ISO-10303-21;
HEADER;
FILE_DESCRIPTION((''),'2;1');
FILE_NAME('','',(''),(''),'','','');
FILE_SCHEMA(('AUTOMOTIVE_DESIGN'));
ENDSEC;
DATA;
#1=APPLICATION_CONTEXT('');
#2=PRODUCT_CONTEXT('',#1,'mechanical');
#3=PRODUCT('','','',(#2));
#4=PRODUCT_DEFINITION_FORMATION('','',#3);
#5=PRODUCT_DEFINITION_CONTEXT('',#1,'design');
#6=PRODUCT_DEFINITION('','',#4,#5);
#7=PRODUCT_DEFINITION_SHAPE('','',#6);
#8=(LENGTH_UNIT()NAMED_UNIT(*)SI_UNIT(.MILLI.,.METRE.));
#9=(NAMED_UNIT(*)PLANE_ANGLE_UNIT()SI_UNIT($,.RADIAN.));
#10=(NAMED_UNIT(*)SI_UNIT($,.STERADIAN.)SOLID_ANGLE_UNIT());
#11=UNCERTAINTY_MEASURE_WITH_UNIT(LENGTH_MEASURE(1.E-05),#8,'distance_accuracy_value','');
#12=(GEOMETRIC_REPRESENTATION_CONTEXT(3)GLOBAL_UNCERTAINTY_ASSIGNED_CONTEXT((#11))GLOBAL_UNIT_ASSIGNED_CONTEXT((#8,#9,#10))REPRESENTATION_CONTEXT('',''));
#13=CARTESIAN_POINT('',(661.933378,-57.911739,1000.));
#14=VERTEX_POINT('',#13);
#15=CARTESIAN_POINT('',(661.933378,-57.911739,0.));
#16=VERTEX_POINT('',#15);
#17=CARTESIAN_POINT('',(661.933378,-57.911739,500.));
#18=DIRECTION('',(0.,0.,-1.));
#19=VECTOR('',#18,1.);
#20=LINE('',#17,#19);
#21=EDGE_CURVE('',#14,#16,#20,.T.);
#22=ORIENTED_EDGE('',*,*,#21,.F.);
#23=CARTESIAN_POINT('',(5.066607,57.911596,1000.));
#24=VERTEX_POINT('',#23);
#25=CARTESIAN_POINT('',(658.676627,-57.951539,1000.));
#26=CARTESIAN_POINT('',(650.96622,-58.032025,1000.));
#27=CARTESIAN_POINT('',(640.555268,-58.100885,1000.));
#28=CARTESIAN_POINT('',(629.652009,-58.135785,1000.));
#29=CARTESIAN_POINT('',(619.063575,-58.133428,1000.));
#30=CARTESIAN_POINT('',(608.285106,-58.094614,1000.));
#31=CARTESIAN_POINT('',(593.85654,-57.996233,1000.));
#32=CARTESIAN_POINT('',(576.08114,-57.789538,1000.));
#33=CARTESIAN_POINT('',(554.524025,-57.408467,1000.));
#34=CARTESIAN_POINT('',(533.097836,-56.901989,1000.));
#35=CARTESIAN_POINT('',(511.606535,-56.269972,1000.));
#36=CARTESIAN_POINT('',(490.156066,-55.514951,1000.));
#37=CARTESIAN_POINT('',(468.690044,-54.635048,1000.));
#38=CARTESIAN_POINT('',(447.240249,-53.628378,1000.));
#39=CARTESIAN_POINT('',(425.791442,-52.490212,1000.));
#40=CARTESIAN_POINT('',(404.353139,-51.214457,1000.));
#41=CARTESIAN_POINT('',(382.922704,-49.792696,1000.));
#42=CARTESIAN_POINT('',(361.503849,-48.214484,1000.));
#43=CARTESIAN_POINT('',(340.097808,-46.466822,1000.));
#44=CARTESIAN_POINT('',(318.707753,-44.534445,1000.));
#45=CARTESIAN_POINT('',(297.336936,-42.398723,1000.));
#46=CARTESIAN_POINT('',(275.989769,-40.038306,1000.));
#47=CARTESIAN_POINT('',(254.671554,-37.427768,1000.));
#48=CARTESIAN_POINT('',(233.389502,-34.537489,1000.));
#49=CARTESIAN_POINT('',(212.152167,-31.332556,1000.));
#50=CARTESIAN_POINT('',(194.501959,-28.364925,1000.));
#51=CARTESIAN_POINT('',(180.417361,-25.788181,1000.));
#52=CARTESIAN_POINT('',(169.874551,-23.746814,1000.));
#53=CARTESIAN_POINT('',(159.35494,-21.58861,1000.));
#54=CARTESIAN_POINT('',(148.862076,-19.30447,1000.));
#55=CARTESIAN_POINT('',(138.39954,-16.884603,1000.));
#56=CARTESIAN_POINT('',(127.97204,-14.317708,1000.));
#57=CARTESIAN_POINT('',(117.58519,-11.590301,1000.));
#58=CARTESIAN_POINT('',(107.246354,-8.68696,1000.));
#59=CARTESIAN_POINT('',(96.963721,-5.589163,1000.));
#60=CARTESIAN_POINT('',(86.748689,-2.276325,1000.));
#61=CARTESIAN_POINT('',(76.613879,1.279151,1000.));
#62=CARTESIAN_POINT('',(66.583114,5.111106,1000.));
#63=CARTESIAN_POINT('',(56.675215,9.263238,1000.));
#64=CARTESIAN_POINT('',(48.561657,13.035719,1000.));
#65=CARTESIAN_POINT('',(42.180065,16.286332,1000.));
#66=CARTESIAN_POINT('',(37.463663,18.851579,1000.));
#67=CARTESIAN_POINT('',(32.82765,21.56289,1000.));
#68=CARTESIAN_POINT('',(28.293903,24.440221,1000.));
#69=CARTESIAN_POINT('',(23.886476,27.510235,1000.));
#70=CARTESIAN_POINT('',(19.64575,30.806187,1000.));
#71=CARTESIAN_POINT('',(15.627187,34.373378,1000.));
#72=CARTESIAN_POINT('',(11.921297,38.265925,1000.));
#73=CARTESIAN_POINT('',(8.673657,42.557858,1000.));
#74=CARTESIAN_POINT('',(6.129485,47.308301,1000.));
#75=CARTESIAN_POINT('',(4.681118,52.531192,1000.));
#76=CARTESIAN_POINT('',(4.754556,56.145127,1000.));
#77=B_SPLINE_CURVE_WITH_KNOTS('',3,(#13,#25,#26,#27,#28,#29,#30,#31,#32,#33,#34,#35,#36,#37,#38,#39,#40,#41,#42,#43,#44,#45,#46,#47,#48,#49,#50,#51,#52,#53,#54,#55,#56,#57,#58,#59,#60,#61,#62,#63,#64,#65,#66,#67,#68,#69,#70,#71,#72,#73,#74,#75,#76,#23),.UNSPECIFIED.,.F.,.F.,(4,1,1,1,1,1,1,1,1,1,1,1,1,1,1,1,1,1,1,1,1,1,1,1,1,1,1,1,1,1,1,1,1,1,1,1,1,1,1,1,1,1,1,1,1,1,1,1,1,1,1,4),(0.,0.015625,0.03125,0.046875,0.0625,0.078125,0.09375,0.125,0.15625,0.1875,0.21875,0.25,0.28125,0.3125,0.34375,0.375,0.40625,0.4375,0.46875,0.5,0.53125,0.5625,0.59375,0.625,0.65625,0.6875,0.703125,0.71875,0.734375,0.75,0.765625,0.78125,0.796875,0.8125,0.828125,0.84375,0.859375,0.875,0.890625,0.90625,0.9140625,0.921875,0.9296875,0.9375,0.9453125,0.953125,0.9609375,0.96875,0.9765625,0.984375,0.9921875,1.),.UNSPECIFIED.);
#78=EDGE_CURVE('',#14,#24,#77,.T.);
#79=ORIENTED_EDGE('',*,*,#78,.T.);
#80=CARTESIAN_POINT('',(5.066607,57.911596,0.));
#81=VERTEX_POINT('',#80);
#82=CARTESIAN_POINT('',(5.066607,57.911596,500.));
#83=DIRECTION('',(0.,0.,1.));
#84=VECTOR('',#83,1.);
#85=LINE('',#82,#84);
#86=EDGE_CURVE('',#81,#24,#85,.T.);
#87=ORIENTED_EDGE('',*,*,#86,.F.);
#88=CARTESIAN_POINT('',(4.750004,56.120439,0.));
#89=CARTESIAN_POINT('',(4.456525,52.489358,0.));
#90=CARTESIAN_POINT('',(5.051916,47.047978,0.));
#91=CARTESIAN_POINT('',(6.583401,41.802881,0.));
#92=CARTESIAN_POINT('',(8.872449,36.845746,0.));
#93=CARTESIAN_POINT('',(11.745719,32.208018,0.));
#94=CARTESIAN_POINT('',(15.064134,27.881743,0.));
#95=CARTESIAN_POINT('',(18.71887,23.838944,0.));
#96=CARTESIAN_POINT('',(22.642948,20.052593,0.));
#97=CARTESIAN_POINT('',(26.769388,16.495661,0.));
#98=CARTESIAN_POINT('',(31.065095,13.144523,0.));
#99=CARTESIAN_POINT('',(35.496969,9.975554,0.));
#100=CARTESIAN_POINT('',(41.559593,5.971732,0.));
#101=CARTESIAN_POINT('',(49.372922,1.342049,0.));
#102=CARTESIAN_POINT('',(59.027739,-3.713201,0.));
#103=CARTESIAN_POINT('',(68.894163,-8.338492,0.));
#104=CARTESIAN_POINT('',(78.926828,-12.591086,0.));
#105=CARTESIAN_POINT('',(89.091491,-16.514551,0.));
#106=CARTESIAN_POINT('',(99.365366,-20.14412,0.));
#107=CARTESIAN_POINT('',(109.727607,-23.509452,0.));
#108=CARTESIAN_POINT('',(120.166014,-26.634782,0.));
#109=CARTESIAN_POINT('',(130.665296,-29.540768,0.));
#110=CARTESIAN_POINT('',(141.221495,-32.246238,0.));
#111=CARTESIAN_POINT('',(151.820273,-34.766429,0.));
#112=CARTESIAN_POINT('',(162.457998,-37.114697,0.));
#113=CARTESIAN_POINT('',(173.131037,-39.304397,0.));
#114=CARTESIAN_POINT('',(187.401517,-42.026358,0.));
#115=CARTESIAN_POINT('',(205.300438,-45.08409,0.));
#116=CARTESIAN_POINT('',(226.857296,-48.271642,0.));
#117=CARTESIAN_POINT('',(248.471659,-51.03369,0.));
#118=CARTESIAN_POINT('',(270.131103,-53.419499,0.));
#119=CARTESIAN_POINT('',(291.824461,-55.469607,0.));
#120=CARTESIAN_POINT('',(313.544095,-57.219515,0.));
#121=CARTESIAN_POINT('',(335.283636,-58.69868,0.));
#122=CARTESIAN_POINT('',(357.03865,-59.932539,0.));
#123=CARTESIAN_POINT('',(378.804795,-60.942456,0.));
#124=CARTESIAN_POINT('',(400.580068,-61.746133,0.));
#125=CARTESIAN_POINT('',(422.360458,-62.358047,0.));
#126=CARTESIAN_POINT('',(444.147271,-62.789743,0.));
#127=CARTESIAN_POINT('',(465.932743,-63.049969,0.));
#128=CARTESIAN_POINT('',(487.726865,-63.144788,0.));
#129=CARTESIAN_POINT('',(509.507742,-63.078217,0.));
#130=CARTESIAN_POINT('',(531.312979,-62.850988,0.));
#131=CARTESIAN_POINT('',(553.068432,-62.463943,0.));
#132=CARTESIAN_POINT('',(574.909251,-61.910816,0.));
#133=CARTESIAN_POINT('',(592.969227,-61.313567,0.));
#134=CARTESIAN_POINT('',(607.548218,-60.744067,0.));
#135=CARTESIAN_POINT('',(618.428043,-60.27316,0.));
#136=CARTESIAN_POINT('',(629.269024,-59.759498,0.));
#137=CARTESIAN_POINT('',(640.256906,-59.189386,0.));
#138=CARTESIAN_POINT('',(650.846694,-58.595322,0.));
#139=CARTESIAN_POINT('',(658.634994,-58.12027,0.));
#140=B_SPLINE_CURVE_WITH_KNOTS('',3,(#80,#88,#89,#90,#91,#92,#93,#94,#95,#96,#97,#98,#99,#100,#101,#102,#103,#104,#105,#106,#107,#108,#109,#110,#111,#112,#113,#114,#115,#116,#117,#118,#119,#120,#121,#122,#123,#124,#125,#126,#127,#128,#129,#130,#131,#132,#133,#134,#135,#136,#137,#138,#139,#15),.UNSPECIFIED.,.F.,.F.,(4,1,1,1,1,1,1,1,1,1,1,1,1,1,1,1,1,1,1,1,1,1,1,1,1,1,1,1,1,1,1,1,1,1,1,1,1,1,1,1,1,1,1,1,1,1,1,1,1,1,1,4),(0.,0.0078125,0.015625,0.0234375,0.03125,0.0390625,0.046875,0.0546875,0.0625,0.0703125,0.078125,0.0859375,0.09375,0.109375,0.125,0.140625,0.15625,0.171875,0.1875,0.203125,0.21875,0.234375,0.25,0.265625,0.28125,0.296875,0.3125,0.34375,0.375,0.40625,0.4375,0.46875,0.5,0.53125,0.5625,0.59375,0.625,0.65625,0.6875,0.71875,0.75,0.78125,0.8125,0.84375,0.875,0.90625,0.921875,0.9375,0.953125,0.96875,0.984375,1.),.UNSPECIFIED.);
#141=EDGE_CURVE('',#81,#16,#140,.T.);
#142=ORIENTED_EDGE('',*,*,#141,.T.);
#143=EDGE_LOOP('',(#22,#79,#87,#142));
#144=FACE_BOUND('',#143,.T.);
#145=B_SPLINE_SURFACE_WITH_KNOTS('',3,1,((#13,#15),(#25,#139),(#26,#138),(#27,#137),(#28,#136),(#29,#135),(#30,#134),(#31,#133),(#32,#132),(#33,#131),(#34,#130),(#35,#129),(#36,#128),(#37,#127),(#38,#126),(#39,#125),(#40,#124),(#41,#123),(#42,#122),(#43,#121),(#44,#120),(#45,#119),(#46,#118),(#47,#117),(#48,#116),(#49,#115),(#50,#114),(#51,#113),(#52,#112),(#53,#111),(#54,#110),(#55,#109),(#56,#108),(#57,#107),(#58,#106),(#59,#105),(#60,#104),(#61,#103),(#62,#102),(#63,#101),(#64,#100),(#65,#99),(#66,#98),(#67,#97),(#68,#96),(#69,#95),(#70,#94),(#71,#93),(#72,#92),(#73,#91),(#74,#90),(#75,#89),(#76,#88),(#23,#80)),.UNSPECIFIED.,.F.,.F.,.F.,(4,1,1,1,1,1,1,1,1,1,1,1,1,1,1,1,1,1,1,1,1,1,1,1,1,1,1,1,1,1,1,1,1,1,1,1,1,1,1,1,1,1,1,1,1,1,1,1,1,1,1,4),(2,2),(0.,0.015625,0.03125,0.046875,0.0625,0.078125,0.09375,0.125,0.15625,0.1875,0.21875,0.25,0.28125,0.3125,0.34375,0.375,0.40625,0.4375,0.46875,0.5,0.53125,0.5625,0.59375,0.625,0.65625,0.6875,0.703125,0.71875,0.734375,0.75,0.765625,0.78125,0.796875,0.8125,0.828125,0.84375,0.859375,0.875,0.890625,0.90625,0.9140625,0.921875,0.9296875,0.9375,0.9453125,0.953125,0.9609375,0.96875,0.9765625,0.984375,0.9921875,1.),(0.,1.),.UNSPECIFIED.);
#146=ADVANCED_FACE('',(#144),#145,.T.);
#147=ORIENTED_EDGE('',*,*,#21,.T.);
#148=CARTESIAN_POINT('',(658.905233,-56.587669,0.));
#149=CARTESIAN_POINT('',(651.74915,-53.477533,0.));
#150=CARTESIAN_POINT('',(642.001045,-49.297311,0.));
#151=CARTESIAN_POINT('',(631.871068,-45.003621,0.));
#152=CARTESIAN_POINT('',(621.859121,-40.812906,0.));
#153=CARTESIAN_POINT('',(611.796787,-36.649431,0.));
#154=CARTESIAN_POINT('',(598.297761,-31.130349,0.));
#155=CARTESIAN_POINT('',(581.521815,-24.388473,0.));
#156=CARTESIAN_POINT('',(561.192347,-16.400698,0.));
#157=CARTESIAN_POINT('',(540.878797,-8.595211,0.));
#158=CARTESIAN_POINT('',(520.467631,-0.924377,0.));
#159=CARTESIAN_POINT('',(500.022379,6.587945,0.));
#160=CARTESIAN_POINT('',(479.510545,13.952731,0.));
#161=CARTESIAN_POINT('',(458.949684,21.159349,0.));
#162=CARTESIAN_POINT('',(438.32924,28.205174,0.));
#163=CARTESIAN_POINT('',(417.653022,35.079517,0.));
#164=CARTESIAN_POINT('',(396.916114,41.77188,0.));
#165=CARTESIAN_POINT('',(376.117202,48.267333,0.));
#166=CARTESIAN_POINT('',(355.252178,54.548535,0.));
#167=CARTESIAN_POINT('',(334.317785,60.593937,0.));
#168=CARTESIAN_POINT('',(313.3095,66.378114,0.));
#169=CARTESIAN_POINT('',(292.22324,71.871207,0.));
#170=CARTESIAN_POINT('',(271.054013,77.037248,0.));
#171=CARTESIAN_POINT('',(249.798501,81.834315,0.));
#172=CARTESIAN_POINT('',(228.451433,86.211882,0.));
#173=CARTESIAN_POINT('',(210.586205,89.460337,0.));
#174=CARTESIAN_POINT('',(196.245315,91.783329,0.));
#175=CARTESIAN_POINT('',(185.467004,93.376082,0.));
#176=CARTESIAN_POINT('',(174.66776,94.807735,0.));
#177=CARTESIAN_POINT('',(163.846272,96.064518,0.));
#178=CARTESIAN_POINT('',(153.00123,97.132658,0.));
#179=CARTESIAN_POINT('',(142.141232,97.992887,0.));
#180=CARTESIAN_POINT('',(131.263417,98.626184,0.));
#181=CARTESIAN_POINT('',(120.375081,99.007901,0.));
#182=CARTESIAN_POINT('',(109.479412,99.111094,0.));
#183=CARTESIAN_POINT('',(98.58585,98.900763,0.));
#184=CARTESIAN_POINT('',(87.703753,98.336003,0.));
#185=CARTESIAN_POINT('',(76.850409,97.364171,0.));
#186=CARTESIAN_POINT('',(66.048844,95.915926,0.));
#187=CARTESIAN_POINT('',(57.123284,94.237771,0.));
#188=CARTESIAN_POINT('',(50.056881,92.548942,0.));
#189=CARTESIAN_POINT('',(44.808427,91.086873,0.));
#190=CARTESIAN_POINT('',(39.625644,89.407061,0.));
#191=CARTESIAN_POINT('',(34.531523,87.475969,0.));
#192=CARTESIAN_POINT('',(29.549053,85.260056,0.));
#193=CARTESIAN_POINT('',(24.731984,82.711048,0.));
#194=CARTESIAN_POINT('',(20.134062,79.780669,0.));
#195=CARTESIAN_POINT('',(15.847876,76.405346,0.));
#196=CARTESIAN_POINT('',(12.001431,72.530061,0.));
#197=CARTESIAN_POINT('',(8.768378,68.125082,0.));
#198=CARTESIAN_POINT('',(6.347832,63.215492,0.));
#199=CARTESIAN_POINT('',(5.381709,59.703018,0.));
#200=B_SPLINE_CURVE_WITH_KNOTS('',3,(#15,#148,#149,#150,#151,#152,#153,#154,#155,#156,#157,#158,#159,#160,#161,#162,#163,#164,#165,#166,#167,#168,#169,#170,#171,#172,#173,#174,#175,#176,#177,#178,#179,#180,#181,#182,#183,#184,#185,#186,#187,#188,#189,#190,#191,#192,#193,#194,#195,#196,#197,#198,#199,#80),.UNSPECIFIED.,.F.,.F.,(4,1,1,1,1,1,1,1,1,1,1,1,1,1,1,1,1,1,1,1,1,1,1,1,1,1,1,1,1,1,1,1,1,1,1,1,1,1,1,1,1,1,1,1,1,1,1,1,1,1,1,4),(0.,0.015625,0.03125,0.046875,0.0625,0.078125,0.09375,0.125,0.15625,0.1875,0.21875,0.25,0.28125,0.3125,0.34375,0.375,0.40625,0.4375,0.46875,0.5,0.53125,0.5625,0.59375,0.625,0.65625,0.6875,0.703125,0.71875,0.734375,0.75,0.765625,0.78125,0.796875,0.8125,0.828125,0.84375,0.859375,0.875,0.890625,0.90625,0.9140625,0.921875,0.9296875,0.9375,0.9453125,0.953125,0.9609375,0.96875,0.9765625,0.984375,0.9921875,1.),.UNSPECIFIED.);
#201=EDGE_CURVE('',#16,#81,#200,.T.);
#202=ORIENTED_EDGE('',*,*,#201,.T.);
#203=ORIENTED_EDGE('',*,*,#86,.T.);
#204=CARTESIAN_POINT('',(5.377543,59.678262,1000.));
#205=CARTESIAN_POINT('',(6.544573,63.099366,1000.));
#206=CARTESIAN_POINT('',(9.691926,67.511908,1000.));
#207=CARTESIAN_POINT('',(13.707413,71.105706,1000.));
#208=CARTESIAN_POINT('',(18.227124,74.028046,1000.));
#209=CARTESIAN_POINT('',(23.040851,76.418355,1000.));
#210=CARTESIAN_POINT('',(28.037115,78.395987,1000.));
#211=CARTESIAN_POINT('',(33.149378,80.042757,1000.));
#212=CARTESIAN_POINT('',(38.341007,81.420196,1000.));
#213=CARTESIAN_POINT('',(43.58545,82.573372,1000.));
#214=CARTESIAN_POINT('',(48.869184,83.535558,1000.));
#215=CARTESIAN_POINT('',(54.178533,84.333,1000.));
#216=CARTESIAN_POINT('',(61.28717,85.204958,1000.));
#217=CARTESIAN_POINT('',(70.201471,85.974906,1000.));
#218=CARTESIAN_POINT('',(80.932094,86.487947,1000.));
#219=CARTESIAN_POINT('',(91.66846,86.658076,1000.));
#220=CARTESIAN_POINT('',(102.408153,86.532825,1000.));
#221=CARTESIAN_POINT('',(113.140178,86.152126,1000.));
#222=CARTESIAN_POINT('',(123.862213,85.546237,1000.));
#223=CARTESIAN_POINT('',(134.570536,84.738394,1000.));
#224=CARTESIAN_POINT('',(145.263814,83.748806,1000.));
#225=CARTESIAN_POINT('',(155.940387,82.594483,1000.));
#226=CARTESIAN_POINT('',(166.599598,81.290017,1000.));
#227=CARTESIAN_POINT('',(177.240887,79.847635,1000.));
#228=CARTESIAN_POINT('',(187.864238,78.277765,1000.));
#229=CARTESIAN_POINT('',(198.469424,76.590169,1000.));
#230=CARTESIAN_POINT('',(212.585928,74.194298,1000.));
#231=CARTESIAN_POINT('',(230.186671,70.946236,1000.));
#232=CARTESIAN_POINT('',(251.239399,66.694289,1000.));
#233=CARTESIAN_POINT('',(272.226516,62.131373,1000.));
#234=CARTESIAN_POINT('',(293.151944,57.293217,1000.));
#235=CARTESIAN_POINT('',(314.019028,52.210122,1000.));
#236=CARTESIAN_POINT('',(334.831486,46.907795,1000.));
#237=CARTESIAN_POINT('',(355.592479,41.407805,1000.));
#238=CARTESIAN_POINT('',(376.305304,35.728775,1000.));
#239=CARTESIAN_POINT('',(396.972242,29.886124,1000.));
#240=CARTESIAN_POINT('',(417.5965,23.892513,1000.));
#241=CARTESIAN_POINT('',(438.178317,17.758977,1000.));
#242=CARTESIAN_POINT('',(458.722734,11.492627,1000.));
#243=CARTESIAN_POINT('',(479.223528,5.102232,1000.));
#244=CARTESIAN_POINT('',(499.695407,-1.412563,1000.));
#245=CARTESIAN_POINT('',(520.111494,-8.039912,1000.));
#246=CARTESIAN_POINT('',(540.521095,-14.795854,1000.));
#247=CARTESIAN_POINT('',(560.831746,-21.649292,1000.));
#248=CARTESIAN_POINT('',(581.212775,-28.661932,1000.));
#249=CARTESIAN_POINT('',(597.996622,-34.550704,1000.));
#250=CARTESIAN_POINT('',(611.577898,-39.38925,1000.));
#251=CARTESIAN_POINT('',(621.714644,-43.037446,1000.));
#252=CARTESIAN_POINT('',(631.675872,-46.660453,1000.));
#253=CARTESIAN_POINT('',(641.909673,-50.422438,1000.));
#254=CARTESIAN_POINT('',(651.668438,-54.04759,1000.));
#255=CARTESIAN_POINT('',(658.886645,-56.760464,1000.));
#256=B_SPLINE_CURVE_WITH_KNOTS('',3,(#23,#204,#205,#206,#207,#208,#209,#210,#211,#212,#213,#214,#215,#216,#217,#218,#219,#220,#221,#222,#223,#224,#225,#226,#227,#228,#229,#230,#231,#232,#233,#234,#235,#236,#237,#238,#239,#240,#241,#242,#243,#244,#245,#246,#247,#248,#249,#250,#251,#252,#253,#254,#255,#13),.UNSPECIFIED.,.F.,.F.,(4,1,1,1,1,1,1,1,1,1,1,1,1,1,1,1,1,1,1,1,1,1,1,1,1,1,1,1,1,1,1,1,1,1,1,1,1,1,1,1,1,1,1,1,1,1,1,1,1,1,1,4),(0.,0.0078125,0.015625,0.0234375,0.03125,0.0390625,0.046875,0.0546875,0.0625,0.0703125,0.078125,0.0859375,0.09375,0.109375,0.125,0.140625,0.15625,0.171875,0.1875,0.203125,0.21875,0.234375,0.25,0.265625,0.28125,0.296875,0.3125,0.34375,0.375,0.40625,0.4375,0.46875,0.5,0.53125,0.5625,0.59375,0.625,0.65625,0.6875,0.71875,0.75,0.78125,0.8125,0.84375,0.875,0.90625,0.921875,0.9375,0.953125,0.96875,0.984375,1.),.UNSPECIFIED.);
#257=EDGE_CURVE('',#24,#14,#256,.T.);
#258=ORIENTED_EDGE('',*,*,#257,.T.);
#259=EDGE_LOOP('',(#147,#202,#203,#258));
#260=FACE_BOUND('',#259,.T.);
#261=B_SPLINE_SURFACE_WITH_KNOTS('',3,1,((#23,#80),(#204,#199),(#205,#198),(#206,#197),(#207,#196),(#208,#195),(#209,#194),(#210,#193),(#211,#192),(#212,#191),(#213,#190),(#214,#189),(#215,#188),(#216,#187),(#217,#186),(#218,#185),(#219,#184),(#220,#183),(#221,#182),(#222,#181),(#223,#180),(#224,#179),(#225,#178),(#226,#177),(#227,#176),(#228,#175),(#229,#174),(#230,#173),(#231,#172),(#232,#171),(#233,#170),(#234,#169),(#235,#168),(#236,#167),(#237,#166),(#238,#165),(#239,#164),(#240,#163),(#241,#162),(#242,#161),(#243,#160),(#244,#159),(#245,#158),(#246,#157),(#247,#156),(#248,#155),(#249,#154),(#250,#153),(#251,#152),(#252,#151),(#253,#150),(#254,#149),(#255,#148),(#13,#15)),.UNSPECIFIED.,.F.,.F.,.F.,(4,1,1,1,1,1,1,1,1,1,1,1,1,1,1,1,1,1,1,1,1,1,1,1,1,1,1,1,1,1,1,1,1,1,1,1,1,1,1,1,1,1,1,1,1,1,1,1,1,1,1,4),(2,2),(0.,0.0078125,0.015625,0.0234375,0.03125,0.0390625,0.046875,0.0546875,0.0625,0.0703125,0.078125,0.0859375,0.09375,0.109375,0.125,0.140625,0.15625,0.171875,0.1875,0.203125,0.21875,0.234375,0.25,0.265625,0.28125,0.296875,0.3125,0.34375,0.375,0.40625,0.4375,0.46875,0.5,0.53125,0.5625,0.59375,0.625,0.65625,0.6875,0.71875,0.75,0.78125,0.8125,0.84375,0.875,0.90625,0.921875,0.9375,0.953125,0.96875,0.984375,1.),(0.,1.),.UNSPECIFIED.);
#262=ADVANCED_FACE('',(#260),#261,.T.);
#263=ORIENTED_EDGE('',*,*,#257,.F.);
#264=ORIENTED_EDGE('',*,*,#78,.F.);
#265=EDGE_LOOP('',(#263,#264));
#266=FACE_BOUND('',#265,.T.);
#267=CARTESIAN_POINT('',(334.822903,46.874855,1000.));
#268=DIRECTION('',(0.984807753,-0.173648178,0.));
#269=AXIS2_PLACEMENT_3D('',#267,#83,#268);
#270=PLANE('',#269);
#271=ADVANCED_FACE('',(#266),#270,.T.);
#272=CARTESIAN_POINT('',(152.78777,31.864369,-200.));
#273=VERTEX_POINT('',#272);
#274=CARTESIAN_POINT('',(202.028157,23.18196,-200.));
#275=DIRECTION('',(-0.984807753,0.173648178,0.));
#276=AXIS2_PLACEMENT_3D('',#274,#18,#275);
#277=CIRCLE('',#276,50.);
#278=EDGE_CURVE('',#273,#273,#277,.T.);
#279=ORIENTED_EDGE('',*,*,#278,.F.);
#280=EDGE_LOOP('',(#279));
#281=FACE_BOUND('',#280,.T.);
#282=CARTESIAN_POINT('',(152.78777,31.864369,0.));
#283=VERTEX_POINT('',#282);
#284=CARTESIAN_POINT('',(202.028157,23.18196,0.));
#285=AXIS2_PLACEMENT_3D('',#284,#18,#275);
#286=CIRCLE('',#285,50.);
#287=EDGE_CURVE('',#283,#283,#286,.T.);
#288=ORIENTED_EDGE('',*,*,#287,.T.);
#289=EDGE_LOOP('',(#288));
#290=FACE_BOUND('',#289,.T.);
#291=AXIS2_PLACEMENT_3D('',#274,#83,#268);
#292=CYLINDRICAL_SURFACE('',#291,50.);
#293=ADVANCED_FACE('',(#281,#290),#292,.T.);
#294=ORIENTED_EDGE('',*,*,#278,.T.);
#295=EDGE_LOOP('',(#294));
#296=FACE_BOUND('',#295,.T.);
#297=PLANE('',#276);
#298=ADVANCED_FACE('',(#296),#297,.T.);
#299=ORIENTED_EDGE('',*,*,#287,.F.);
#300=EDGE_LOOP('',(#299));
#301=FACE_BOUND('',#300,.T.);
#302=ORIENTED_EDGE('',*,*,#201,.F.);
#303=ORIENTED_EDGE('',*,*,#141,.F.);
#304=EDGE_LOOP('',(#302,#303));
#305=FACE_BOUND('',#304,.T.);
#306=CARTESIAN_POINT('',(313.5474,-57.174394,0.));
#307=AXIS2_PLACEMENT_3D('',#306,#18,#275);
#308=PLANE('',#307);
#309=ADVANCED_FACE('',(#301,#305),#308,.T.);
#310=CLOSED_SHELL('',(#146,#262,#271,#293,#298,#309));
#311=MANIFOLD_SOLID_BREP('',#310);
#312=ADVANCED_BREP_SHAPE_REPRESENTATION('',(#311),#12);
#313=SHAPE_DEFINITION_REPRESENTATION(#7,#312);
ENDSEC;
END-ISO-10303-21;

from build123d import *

# Parameters (mm, degrees)
SKETCH_4_R        = 50
EXTRUDE_1_DEPTH   = 200
MOVE_BODY_1_ANGLE = 10


with BuildPart() as part:
    # 放样1: read off the stored shape, not the designer's step
    # 放样1: loft between two sections, ruled curve by curve
    loft_1_from = [
        Edge.make_bspline([(666.999999998, 0, 1000), (663.799637222, -0.604724548, 1000), (656.220345397, -2.022885982, 1000), (645.979516294, -3.898542902, 1000), (635.247963028, -5.826243875, 1000), (624.819981281, -7.662584434, 1000), (614.198521539, -9.496021813, 1000), (599.972074061, -11.904629718, 1000), (582.430830371, -14.787740297, 1000), (561.135044503, -18.155812197, 1000), (539.946417674, -21.377647562, 1000), (518.671869989, -24.487157927, 1000), (497.416172992, -27.468442034, 1000), (476.123475264, -30.32944244, 1000), (454.824744619, -33.062783586, 1000), (433.50415239, -35.666455969, 1000), (412.170012578, -38.132804161, 1000), (390.818267621, -40.453999041, 1000), (369.450759947, -42.619108718, 1000), (348.066446531, -44.61511771, 1000), (326.665801057, -46.426441856, 1000), (305.24879013, -48.034169355, 1000), (283.816053008, -49.416509673, 1000), (262.368394512, -50.54750092, 1000), (240.907772126, -51.396721383, 1000), (219.436549528, -51.928303079, 1000), (201.539164161, -52.070683511, 1000), (187.221095545, -51.978850226, 1000), (176.483975584, -51.799236258, 1000), (165.749412964, -51.500531623, 1000), (155.01932189, -51.073159695, 1000), (144.295530458, -50.506856143, 1000), (133.580710906, -49.789673503, 1000), (122.878050961, -48.907360236, 1000), (112.192125096, -47.843447663, 1000), (101.527781752, -46.578273412, 1000), (90.892670861, -45.089586686, 1000), (80.294429011, -43.348017915, 1000), (69.750642268, -41.316102027, 1000), (59.27225592, -38.947539372, 1000), (50.626877349, -36.641275533, 1000), (43.777772332, -34.54819846, 1000), (38.687572512, -32.840917397, 1000), (33.65117684, -30.975832975, 1000), (28.686664939, -28.92949158, 1000), (23.813093939, -26.671460223, 1000), (19.064458401, -24.161974773, 1000), (14.487509708, -21.346794417, 1000), (10.161987345, -18.156904498, 1000), (6.218399789, -14.494122288, 1000), (2.887973837, -10.257639927, 1000), (0.554665428, -5.36560271, 1000), (-0.00056538, -1.793819625, 1000), (0, 0, 1000)], [0, 0, 0, 0, 0.015625, 0.03125, 0.046875, 0.0625, 0.078125, 0.09375, 0.125, 0.15625, 0.1875, 0.21875, 0.25, 0.28125, 0.3125, 0.34375, 0.375, 0.40625, 0.4375, 0.46875, 0.5, 0.53125, 0.5625, 0.59375, 0.625, 0.65625, 0.6875, 0.703125, 0.71875, 0.734375, 0.75, 0.765625, 0.78125, 0.796875, 0.8125, 0.828125, 0.84375, 0.859375, 0.875, 0.890625, 0.90625, 0.9140625, 0.921875, 0.9296875, 0.9375, 0.9453125, 0.953125, 0.9609375, 0.96875, 0.9765625, 0.984375, 0.9921875, 1, 1, 1, 1], 3),
        Edge.make_bspline([(0, 0, 1000), (-0.00056538, 1.793819625, 1000), (0.554665457, 5.365602719, 1000), (2.887973782, 10.257639911, 1000), (6.218399893, 14.494122319, 1000), (10.16198715, 18.156904441, 1000), (14.487510113, 21.346794535, 1000), (19.064457581, 24.161974532, 1000), (23.813095456, 26.671460667, 1000), (28.686661745, 28.929490645, 1000), (33.651182789, 30.975834716, 1000), (38.687562847, 32.840914568, 1000), (43.77777737, 34.548199936, 1000), (50.627004326, 36.641312682, 1000), (59.272176198, 38.947516048, 1000), (69.75068889, 41.316115667, 1000), (80.294402937, 43.348010287, 1000), (90.892684893, 45.089590791, 1000), (101.527774389, 46.578271259, 1000), (112.192129243, 47.843448873, 1000), (122.878048588, 48.907359547, 1000), (133.580712133, 49.789673852, 1000), (144.295529784, 50.506855964, 1000), (155.019322303, 51.073159781, 1000), (165.7494126, 51.500531586, 1000), (176.483976098, 51.799236258, 1000), (187.221094044, 51.978850255, 1000), (201.539174789, 52.070683467, 1000), (219.436542978, 51.928303134, 1000), (240.907775179, 51.396721346, 1000), (262.368393037, 50.54750093, 1000), (283.816053471, 49.416509703, 1000), (305.248790507, 48.034169261, 1000), (326.665799717, 46.426442055, 1000), (348.066449966, 44.615117246, 1000), (369.450753442, 42.619109596, 1000), (390.818280118, 40.453997321, 1000), (412.169989323, 38.132807449, 1000), (433.504199323, 35.666449175, 1000), (454.824640648, 33.062798963, 1000), (476.123661756, 30.329414262, 1000), (497.415809346, 27.468498036, 1000), (518.672557556, 24.487049873, 1000), (539.945247415, 21.377835197, 1000), (561.137421083, 18.155424744, 1000), (582.426549093, 14.788450701, 1000), (599.977986088, 11.903627109, 1000), (614.193135953, 9.496953161, 1000), (624.809385208, 7.66440837, 1000), (635.248408041, 5.826192456, 1000), (645.979996559, 3.898441222, 1000), (656.220005166, 2.022955598, 1000), (663.799637221, 0.604724548, 1000), (666.999999998, 0, 1000)], [0, 0, 0, 0, 0.0078125, 0.015625, 0.0234375, 0.03125, 0.0390625, 0.046875, 0.0546875, 0.0625, 0.0703125, 0.078125, 0.0859375, 0.09375, 0.109375, 0.125, 0.140625, 0.15625, 0.171875, 0.1875, 0.203125, 0.21875, 0.234375, 0.25, 0.265625, 0.28125, 0.296875, 0.3125, 0.34375, 0.375, 0.40625, 0.4375, 0.46875, 0.5, 0.53125, 0.5625, 0.59375, 0.625, 0.65625, 0.6875, 0.71875, 0.75, 0.78125, 0.8125, 0.84375, 0.875, 0.90625, 0.921875, 0.9375, 0.953125, 0.96875, 0.984375, 1, 1, 1, 1], 3),
    ]
    loft_1_to = [
        Edge.make_bspline([(667, 0, 0), (663.787937121, -0.778122232, 0), (656.200450193, -2.598380354, 0), (645.874703604, -5.022316958, 0), (635.152751042, -7.491793756, 0), (624.5656651, -9.880168768, 0), (613.932901468, -12.233182769, 0), (599.674290652, -15.325646654, 0), (581.992397773, -19.049903866, 0), (560.57943939, -23.387245223, 0), (539.221710022, -27.546205859, 0), (517.787201902, -31.556421716, 0), (496.348785222, -35.404191447, 0), (474.869299834, -39.09532252, 0), (453.369610223, -42.622057623, 0), (431.838824667, -45.980159867, 0), (410.283069511, -49.159666954, 0), (388.699054607, -52.149437047, 0), (367.088216437, -54.934513775, 0), (345.449452769, -57.497118306, 0), (323.783329406, -59.815457029, 0), (302.089797679, -61.863709181, 0), (280.370013167, -63.611758836, 0), (258.625333152, -65.023318773, 0), (236.859716284, -66.056526685, 0), (215.07684211, -66.660710105, 0), (196.918876775, -66.757547051, 0), (182.392533714, -66.55498137, 0), (171.501404926, -66.251902277, 0), (160.617518552, -65.786531136, 0), (149.742132912, -65.14508538, 0), (138.876506323, -64.313782442, 0), (128.032113187, -63.275126167, 0), (117.209580934, -62.009887151, 0), (106.420382287, -60.495066539, 0), (95.672322051, -58.704678377, 0), (84.980781239, -56.605895334, 0), (74.36207887, -54.160061058, 0), (63.842374932, -51.318325944, 0), (53.456401835, -48.016417607, 0), (44.957838639, -44.813840559, 0), (38.292062891, -41.923609068, 0), (33.377232896, -39.572370085, 0), (28.56486913, -37.018085304, 0), (23.883463681, -34.231740425, 0), (19.36150864, -31.18432115, 0), (15.060271723, -27.837579504, 0), (11.041020644, -24.153267514, 0), (7.406069775, -20.084935176, 0), (4.290999374, -15.600598491, 0), (1.871979479, -10.701125876, 0), (0.340748863, -5.445801038, 0), (-0.000762063, -1.818923188, 0), (0, 0, 0)], [0, 0, 0, 0, 0.015625, 0.03125, 0.046875, 0.0625, 0.078125, 0.09375, 0.125, 0.15625, 0.1875, 0.21875, 0.25, 0.28125, 0.3125, 0.34375, 0.375, 0.40625, 0.4375, 0.46875, 0.5, 0.53125, 0.5625, 0.59375, 0.625, 0.65625, 0.6875, 0.703125, 0.71875, 0.734375, 0.75, 0.765625, 0.78125, 0.796875, 0.8125, 0.828125, 0.84375, 0.859375, 0.875, 0.890625, 0.90625, 0.9140625, 0.921875, 0.9296875, 0.9375, 0.9453125, 0.953125, 0.9609375, 0.96875, 0.9765625, 0.984375, 0.9921875, 1, 1, 1, 1], 3),
        Edge.make_bspline([(0, 0, 0), (-0.000762063, 1.818923188, 0), (0.340748548, 5.445800771, 0), (1.871980086, 10.701126391, 0), (4.290998372, 15.600597641, 0), (7.406071183, 20.084936371, 0), (11.041021844, 24.15326852, 0), (15.060236322, 27.837549592, 0), (19.361493058, 31.184307985, 0), (23.883478049, 34.231752566, 0), (28.564877292, 37.018092199, 0), (33.377225985, 39.572364244, 0), (38.292059332, 41.923606062, 0), (44.957845322, 44.81384621, 0), (53.456396907, 48.016413426, 0), (63.842377593, 51.318328228, 0), (74.36207734, 54.160059689, 0), (84.980781846, 56.605896032, 0), (95.6723223, 58.704678198, 0), (106.420381084, 60.495066274, 0), (117.209583402, 62.009887926, 0), (128.03211035, 63.275124839, 0), (138.876497485, 64.313783504, 0), (149.742260365, 65.145092619, 0), (160.617583681, 65.786535028, 0), (171.501366862, 66.251900805, 0), (182.392509333, 66.554980024, 0), (196.91891222, 66.75754823, 0), (215.076816077, 66.660709555, 0), (236.859730532, 66.056526855, 0), (258.625324823, 65.023318727, 0), (280.370017887, 63.611758862, 0), (302.089795835, 61.863709105, 0), (323.783329573, 59.815457216, 0), (345.449454995, 57.497117841, 0), (367.088211422, 54.934514671, 0), (388.699064902, 52.149435238, 0), (410.283049885, 49.15967045, 0), (431.83886648, 45.980152247, 0), (453.369533879, 42.622071814, 0), (474.869445862, 39.095294769, 0), (496.348540372, 35.404238832, 0), (517.787684284, 31.556326568, 0), (539.220784537, 27.546391723, 0), (560.581135329, 23.386898456, 0), (581.988814982, 19.050650465, 0), (599.680611516, 15.324311348, 0), (613.932935101, 12.233157769, 0), (624.565379788, 9.880240812, 0), (635.152932724, 7.491748581, 0), (645.874603859, 5.02234186, 0), (656.200501376, 2.598367496, 0), (663.787937121, 0.778122232, 0), (667, 0, 0)], [0, 0, 0, 0, 0.0078125, 0.015625, 0.0234375, 0.03125, 0.0390625, 0.046875, 0.0546875, 0.0625, 0.0703125, 0.078125, 0.0859375, 0.09375, 0.109375, 0.125, 0.140625, 0.15625, 0.171875, 0.1875, 0.203125, 0.21875, 0.234375, 0.25, 0.265625, 0.28125, 0.296875, 0.3125, 0.34375, 0.375, 0.40625, 0.4375, 0.46875, 0.5, 0.53125, 0.5625, 0.59375, 0.625, 0.65625, 0.6875, 0.71875, 0.75, 0.78125, 0.8125, 0.84375, 0.875, 0.90625, 0.921875, 0.9375, 0.953125, 0.96875, 0.984375, 1, 1, 1, 1], 3),
    ]
    loft_1 = Solid(Shell([*[Face.make_surface_from_curves(loft_1_from[k], loft_1_to[k]) for k in range(2)], Face(Wire(loft_1_from)), Face(Wire(loft_1_to))]))
    add(loft_1)

    # 草图4 → 凸台-拉伸1 (add)
    with BuildSketch(Plane(origin=(0, 0, 0), x_dir=(-1, 0, 0), z_dir=(0, 0, -1))):
        with Locations((-200, 0)):
            Circle(SKETCH_4_R)
    extrude(amount=EXTRUDE_1_DEPTH)


with BuildPart() as part_1:
    # Move Body 1: moved
    add(part.part.rotate(Axis((333.49958875, 7.784e-06, 0), (0, 0, -1)), MOVE_BODY_1_ANGLE))


solid = part_1.part
